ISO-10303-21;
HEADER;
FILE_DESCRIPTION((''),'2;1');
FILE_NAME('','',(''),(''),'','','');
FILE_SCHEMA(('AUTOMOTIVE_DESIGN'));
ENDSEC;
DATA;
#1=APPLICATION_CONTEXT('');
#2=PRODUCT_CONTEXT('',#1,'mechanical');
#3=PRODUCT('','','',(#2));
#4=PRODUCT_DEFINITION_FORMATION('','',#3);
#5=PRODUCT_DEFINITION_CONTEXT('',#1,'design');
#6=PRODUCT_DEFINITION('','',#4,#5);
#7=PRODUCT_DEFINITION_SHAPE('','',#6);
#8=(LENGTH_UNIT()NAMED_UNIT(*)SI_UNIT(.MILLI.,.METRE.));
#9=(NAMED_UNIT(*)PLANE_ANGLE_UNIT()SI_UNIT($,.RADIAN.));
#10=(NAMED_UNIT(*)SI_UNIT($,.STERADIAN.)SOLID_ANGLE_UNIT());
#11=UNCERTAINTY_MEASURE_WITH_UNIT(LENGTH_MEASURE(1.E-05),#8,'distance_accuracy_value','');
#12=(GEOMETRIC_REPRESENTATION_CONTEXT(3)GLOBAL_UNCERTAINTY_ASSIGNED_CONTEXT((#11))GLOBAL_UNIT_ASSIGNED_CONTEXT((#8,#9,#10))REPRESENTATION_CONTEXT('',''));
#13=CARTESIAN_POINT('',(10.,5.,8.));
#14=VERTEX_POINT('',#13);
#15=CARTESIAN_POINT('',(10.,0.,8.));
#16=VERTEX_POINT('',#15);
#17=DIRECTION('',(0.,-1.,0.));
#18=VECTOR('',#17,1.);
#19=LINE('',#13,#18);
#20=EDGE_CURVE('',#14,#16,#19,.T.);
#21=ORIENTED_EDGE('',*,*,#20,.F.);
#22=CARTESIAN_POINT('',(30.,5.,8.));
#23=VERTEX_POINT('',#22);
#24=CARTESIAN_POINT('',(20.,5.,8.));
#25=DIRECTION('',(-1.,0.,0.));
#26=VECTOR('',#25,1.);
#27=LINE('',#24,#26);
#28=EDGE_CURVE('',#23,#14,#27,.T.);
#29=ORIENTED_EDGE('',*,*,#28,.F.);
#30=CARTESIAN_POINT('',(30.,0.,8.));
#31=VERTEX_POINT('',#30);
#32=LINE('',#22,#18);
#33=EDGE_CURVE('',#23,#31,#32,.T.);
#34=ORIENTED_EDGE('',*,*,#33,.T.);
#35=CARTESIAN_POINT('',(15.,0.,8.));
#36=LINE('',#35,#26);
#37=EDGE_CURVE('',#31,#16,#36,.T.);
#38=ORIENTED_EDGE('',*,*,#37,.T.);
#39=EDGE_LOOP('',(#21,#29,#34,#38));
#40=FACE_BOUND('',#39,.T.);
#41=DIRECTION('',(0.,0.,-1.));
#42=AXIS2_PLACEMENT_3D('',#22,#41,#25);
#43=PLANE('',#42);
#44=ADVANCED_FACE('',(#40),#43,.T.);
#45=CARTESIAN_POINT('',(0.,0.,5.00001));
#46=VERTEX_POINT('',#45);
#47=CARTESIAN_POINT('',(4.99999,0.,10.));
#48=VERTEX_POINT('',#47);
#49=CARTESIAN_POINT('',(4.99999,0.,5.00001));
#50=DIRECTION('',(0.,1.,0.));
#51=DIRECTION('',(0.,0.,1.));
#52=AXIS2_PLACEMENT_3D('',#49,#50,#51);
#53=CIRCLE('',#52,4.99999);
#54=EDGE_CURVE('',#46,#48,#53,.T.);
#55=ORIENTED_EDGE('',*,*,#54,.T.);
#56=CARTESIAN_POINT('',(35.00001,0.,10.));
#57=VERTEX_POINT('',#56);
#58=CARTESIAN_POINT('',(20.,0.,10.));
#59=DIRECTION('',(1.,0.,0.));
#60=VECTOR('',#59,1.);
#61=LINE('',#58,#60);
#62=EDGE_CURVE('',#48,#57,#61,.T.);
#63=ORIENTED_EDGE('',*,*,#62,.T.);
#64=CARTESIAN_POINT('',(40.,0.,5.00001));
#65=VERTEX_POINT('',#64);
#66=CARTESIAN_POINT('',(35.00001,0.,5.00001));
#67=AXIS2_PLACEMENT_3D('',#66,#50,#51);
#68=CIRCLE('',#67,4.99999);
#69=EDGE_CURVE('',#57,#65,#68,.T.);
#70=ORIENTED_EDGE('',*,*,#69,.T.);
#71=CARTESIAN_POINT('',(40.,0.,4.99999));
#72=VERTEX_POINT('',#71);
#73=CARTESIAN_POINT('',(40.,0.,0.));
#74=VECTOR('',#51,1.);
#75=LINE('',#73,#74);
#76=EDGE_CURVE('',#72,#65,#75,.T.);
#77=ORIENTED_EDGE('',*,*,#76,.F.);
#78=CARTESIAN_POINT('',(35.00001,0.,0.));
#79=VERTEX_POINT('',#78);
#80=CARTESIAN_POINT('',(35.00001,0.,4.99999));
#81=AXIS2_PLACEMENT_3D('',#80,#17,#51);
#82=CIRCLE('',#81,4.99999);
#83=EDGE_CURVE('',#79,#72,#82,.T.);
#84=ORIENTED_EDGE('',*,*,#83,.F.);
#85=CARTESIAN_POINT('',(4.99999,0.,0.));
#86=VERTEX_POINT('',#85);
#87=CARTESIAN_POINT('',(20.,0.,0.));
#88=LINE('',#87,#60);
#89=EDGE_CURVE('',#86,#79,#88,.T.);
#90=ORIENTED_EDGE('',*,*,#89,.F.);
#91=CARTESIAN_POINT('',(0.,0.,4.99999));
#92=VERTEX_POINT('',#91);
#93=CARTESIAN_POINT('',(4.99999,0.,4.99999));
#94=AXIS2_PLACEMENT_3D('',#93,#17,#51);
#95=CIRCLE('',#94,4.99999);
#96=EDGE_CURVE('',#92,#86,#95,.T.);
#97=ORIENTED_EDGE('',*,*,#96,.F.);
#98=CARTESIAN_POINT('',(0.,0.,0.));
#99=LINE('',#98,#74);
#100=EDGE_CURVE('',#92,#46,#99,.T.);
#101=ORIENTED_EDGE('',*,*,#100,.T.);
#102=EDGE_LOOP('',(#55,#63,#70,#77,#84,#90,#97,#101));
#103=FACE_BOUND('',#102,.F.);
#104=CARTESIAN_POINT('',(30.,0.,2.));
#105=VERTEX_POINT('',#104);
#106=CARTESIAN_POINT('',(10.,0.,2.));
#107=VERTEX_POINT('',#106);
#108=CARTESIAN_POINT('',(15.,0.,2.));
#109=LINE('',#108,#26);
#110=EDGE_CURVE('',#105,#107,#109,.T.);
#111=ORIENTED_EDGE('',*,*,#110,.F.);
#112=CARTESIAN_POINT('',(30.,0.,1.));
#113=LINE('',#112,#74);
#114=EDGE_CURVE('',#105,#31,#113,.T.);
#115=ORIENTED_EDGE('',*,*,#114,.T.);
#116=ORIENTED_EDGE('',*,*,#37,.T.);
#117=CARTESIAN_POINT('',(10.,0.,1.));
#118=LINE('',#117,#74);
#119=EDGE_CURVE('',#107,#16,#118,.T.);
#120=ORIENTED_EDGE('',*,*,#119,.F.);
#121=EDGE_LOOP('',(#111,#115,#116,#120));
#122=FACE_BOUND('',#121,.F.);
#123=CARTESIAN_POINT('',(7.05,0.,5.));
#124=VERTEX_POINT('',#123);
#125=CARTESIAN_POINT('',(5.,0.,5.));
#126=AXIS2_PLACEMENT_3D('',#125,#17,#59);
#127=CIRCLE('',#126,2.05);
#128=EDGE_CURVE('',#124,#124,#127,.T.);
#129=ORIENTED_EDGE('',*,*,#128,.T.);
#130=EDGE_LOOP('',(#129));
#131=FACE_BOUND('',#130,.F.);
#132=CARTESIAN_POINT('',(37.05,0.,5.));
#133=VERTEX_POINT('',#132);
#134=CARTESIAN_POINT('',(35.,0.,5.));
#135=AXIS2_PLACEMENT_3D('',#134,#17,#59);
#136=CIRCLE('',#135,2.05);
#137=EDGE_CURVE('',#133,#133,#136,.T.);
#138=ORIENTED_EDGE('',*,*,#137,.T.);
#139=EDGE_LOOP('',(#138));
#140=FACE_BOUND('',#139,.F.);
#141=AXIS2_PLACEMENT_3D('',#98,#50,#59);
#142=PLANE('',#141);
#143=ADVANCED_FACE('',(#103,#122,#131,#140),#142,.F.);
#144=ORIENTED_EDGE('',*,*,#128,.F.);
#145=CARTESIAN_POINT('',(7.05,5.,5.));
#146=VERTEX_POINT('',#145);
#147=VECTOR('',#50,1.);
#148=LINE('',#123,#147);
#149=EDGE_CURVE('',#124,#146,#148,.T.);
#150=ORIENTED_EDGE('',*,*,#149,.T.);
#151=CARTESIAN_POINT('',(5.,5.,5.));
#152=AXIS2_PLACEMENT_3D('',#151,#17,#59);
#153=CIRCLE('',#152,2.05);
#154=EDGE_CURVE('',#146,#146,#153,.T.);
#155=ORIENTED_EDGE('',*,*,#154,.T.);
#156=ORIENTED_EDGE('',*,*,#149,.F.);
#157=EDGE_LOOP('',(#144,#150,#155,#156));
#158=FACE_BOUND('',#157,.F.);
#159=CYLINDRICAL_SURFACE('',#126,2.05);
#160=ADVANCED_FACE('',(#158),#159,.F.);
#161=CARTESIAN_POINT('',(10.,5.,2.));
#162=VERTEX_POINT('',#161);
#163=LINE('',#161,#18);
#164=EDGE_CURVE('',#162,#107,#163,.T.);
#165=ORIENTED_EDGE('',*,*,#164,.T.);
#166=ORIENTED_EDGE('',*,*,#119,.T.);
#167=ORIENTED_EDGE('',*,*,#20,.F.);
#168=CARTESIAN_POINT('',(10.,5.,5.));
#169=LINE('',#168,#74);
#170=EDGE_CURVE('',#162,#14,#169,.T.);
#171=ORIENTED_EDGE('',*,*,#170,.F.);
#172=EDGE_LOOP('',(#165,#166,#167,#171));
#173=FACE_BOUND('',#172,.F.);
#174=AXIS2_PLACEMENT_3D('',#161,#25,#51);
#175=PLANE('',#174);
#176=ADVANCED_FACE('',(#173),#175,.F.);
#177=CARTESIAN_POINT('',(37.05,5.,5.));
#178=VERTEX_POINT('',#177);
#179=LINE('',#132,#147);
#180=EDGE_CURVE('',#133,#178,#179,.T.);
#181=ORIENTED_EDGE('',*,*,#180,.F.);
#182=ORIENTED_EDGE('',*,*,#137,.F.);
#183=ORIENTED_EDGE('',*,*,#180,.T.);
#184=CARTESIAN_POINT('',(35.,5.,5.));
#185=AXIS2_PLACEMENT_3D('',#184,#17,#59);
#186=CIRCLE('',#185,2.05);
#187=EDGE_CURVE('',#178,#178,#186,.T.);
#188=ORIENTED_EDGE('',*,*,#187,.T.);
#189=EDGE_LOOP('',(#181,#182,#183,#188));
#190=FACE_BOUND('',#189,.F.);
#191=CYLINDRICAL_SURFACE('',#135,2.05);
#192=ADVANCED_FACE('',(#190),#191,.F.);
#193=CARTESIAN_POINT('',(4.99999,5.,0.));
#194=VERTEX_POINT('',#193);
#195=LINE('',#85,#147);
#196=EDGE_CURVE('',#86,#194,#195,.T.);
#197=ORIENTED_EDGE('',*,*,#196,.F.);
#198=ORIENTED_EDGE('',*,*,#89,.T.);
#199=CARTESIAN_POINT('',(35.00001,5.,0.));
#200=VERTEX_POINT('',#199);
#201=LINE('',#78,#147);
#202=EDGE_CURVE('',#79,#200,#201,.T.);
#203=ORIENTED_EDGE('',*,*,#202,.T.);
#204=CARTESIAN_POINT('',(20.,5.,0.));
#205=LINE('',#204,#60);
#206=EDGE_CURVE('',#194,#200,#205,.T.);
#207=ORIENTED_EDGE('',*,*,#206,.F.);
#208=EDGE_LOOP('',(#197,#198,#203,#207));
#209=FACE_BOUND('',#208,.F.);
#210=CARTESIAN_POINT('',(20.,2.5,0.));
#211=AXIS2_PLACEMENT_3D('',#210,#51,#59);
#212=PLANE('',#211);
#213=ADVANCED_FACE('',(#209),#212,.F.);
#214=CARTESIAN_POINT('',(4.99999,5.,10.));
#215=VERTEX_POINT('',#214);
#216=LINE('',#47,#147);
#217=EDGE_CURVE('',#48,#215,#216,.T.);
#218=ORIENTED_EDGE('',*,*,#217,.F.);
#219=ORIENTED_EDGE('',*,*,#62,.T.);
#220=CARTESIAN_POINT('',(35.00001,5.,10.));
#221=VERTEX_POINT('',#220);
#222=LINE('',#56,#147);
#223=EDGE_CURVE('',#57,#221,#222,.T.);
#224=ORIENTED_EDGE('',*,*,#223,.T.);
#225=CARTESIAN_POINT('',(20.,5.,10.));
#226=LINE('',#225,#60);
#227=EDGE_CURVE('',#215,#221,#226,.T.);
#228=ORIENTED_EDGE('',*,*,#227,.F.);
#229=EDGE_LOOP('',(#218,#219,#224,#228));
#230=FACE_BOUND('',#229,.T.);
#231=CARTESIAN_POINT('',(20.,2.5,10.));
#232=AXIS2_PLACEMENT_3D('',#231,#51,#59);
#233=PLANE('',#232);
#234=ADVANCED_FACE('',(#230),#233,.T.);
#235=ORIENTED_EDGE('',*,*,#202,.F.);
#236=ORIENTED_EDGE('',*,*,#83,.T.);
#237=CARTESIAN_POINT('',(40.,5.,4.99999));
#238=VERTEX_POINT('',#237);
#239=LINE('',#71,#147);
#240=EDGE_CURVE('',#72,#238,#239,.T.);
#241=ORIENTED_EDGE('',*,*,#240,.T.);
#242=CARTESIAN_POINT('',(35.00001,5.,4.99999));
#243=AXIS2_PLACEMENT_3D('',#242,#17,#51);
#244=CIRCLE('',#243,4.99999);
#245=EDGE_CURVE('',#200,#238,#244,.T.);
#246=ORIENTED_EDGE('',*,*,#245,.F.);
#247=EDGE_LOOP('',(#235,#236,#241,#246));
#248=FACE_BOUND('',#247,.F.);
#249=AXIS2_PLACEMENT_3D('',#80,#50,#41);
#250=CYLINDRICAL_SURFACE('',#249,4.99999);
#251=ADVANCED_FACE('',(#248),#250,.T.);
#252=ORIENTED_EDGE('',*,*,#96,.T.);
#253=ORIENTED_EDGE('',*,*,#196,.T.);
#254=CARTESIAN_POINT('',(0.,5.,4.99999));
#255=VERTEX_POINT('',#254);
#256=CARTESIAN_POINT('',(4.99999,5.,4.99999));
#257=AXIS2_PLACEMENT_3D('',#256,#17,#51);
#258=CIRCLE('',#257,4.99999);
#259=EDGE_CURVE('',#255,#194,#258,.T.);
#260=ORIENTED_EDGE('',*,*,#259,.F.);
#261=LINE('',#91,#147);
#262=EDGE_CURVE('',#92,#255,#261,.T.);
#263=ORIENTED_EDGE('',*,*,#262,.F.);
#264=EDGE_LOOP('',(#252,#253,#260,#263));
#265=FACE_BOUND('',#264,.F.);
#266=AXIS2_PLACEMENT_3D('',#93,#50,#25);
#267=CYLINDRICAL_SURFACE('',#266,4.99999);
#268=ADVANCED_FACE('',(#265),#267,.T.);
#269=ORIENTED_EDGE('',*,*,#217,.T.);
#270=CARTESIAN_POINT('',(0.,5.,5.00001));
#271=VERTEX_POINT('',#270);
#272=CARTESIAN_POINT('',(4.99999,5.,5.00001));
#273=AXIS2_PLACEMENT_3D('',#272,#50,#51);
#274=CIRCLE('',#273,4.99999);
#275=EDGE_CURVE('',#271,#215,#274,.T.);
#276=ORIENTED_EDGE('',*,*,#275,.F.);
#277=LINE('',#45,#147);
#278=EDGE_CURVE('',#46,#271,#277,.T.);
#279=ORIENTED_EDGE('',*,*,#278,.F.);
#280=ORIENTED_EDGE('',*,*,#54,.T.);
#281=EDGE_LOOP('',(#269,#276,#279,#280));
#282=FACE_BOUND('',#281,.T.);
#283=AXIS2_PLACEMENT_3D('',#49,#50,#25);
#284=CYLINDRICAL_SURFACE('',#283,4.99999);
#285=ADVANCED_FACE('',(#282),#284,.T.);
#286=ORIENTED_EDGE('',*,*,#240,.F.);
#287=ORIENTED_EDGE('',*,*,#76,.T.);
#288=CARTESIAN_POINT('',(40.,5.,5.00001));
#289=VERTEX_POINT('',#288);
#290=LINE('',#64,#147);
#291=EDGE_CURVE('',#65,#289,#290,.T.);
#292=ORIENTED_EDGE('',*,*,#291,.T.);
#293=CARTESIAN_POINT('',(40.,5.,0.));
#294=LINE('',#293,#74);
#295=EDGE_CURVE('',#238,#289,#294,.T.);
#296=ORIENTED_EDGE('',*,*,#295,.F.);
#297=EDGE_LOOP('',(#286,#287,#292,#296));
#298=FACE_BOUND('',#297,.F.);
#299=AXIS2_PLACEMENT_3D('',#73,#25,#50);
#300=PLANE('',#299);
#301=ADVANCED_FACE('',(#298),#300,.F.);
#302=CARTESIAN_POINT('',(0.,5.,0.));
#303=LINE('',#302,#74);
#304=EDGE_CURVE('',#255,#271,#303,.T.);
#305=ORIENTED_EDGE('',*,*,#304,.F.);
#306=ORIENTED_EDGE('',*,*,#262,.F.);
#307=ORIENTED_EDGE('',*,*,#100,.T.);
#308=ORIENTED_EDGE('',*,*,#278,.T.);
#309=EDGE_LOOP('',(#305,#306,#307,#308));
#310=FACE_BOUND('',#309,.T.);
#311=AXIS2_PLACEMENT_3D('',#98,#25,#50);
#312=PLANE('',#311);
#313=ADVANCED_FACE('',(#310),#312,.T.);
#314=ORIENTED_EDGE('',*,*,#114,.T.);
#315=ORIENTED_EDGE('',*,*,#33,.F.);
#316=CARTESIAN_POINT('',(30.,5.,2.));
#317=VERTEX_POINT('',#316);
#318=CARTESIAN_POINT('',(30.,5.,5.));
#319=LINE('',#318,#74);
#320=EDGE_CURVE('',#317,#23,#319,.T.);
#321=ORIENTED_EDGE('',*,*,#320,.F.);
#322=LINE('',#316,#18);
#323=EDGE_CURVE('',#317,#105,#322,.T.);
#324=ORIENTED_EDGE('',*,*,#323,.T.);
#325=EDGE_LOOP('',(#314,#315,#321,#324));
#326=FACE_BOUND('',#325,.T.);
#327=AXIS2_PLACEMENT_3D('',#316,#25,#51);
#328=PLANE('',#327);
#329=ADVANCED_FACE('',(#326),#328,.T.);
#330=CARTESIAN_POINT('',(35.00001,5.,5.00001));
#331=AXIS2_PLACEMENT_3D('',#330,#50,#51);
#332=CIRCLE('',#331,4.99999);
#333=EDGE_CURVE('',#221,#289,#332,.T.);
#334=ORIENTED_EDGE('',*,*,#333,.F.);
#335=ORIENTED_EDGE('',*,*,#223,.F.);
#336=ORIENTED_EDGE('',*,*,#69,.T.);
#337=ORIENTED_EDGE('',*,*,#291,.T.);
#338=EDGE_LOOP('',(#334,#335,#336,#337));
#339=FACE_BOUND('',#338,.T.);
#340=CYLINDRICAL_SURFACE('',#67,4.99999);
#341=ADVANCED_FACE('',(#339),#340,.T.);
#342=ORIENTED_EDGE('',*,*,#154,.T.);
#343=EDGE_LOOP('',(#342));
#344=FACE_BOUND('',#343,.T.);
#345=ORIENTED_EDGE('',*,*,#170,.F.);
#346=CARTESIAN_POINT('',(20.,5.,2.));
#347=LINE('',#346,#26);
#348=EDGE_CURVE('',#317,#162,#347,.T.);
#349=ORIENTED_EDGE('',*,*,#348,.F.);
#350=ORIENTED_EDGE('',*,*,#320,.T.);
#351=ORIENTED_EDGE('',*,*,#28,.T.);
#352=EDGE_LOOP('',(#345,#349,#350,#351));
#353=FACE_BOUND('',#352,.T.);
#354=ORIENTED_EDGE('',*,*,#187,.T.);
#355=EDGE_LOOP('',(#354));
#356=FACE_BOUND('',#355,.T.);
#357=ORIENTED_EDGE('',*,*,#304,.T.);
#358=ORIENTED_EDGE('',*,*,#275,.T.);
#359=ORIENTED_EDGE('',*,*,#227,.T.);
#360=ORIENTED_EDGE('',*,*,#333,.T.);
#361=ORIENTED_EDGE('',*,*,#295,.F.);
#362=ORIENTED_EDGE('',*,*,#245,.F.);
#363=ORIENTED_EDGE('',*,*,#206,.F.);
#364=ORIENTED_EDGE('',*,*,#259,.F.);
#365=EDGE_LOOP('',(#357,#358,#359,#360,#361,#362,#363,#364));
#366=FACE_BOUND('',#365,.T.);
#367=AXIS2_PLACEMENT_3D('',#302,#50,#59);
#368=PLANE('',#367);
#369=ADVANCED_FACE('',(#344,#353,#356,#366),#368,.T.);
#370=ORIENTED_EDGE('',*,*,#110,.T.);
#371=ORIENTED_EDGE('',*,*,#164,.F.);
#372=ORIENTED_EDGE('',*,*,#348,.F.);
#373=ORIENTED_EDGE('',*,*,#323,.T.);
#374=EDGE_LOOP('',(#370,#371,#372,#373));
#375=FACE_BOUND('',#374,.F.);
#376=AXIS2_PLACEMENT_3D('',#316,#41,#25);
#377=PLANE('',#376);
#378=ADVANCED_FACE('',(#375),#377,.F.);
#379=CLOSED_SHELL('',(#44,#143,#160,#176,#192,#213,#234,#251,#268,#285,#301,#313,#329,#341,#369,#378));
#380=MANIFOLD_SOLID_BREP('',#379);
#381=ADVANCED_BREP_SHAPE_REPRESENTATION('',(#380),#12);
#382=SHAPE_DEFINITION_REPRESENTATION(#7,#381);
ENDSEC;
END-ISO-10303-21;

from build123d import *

# Parameters (mm, degrees)
F0_W     = 40
F0_H     = 5
F1_DEPTH = 10
F2_R     = 2.05
F3_DEPTH = 25
F4_R     = 2.05
F5_DEPTH = 25
F6_R     = 4.99999
F7_W     = 20
F7_H     = 6
F8_DEPTH = 25


# Not quite as in the source:
# - a fillet or chamfer is up to 0.001 mm smaller than in the source, because OpenCascade refuses the exact size


with BuildPart() as f1:
    # F0 (on Top) → F1 (new body)
    with BuildSketch(Plane.XY):
        with Locations((20, 2.5)):
            Rectangle(F0_W, F0_H)
    extrude(amount=F1_DEPTH)

    # F2 (on face) → F3 (cut)
    with BuildSketch(Plane.XZ):
        with Locations((5, 5)):
            Circle(F2_R)
    extrude(amount=-F3_DEPTH, mode=Mode.SUBTRACT)

    # F4 (on face) → F5 (cut)
    with BuildSketch(Plane.XZ):
        with Locations((35, 5)):
            Circle(F4_R)
    extrude(amount=-F5_DEPTH, mode=Mode.SUBTRACT)

    # F6 (radius 5 in the source; OpenCascade refuses exactly that, so slightly less here)
    f6_edges = [f1.edges().sort_by_distance(p)[0] for p in [
        (0, 2.5, 10),
        (0, 2.5, 0),
        (40, 2.5, 10),
        (40, 2.5, 0),
    ]]
    fillet(f6_edges, radius=F6_R)

    # F7 (on face) → F8 (cut)
    with BuildSketch(Plane(origin=(0, 5, 0), x_dir=(-1, 0, 0), z_dir=(0, 1, 0))):
        with Locations((-20, 5)):
            Rectangle(F7_W, F7_H)
    extrude(amount=-F8_DEPTH, mode=Mode.SUBTRACT)


solid = f1.part
